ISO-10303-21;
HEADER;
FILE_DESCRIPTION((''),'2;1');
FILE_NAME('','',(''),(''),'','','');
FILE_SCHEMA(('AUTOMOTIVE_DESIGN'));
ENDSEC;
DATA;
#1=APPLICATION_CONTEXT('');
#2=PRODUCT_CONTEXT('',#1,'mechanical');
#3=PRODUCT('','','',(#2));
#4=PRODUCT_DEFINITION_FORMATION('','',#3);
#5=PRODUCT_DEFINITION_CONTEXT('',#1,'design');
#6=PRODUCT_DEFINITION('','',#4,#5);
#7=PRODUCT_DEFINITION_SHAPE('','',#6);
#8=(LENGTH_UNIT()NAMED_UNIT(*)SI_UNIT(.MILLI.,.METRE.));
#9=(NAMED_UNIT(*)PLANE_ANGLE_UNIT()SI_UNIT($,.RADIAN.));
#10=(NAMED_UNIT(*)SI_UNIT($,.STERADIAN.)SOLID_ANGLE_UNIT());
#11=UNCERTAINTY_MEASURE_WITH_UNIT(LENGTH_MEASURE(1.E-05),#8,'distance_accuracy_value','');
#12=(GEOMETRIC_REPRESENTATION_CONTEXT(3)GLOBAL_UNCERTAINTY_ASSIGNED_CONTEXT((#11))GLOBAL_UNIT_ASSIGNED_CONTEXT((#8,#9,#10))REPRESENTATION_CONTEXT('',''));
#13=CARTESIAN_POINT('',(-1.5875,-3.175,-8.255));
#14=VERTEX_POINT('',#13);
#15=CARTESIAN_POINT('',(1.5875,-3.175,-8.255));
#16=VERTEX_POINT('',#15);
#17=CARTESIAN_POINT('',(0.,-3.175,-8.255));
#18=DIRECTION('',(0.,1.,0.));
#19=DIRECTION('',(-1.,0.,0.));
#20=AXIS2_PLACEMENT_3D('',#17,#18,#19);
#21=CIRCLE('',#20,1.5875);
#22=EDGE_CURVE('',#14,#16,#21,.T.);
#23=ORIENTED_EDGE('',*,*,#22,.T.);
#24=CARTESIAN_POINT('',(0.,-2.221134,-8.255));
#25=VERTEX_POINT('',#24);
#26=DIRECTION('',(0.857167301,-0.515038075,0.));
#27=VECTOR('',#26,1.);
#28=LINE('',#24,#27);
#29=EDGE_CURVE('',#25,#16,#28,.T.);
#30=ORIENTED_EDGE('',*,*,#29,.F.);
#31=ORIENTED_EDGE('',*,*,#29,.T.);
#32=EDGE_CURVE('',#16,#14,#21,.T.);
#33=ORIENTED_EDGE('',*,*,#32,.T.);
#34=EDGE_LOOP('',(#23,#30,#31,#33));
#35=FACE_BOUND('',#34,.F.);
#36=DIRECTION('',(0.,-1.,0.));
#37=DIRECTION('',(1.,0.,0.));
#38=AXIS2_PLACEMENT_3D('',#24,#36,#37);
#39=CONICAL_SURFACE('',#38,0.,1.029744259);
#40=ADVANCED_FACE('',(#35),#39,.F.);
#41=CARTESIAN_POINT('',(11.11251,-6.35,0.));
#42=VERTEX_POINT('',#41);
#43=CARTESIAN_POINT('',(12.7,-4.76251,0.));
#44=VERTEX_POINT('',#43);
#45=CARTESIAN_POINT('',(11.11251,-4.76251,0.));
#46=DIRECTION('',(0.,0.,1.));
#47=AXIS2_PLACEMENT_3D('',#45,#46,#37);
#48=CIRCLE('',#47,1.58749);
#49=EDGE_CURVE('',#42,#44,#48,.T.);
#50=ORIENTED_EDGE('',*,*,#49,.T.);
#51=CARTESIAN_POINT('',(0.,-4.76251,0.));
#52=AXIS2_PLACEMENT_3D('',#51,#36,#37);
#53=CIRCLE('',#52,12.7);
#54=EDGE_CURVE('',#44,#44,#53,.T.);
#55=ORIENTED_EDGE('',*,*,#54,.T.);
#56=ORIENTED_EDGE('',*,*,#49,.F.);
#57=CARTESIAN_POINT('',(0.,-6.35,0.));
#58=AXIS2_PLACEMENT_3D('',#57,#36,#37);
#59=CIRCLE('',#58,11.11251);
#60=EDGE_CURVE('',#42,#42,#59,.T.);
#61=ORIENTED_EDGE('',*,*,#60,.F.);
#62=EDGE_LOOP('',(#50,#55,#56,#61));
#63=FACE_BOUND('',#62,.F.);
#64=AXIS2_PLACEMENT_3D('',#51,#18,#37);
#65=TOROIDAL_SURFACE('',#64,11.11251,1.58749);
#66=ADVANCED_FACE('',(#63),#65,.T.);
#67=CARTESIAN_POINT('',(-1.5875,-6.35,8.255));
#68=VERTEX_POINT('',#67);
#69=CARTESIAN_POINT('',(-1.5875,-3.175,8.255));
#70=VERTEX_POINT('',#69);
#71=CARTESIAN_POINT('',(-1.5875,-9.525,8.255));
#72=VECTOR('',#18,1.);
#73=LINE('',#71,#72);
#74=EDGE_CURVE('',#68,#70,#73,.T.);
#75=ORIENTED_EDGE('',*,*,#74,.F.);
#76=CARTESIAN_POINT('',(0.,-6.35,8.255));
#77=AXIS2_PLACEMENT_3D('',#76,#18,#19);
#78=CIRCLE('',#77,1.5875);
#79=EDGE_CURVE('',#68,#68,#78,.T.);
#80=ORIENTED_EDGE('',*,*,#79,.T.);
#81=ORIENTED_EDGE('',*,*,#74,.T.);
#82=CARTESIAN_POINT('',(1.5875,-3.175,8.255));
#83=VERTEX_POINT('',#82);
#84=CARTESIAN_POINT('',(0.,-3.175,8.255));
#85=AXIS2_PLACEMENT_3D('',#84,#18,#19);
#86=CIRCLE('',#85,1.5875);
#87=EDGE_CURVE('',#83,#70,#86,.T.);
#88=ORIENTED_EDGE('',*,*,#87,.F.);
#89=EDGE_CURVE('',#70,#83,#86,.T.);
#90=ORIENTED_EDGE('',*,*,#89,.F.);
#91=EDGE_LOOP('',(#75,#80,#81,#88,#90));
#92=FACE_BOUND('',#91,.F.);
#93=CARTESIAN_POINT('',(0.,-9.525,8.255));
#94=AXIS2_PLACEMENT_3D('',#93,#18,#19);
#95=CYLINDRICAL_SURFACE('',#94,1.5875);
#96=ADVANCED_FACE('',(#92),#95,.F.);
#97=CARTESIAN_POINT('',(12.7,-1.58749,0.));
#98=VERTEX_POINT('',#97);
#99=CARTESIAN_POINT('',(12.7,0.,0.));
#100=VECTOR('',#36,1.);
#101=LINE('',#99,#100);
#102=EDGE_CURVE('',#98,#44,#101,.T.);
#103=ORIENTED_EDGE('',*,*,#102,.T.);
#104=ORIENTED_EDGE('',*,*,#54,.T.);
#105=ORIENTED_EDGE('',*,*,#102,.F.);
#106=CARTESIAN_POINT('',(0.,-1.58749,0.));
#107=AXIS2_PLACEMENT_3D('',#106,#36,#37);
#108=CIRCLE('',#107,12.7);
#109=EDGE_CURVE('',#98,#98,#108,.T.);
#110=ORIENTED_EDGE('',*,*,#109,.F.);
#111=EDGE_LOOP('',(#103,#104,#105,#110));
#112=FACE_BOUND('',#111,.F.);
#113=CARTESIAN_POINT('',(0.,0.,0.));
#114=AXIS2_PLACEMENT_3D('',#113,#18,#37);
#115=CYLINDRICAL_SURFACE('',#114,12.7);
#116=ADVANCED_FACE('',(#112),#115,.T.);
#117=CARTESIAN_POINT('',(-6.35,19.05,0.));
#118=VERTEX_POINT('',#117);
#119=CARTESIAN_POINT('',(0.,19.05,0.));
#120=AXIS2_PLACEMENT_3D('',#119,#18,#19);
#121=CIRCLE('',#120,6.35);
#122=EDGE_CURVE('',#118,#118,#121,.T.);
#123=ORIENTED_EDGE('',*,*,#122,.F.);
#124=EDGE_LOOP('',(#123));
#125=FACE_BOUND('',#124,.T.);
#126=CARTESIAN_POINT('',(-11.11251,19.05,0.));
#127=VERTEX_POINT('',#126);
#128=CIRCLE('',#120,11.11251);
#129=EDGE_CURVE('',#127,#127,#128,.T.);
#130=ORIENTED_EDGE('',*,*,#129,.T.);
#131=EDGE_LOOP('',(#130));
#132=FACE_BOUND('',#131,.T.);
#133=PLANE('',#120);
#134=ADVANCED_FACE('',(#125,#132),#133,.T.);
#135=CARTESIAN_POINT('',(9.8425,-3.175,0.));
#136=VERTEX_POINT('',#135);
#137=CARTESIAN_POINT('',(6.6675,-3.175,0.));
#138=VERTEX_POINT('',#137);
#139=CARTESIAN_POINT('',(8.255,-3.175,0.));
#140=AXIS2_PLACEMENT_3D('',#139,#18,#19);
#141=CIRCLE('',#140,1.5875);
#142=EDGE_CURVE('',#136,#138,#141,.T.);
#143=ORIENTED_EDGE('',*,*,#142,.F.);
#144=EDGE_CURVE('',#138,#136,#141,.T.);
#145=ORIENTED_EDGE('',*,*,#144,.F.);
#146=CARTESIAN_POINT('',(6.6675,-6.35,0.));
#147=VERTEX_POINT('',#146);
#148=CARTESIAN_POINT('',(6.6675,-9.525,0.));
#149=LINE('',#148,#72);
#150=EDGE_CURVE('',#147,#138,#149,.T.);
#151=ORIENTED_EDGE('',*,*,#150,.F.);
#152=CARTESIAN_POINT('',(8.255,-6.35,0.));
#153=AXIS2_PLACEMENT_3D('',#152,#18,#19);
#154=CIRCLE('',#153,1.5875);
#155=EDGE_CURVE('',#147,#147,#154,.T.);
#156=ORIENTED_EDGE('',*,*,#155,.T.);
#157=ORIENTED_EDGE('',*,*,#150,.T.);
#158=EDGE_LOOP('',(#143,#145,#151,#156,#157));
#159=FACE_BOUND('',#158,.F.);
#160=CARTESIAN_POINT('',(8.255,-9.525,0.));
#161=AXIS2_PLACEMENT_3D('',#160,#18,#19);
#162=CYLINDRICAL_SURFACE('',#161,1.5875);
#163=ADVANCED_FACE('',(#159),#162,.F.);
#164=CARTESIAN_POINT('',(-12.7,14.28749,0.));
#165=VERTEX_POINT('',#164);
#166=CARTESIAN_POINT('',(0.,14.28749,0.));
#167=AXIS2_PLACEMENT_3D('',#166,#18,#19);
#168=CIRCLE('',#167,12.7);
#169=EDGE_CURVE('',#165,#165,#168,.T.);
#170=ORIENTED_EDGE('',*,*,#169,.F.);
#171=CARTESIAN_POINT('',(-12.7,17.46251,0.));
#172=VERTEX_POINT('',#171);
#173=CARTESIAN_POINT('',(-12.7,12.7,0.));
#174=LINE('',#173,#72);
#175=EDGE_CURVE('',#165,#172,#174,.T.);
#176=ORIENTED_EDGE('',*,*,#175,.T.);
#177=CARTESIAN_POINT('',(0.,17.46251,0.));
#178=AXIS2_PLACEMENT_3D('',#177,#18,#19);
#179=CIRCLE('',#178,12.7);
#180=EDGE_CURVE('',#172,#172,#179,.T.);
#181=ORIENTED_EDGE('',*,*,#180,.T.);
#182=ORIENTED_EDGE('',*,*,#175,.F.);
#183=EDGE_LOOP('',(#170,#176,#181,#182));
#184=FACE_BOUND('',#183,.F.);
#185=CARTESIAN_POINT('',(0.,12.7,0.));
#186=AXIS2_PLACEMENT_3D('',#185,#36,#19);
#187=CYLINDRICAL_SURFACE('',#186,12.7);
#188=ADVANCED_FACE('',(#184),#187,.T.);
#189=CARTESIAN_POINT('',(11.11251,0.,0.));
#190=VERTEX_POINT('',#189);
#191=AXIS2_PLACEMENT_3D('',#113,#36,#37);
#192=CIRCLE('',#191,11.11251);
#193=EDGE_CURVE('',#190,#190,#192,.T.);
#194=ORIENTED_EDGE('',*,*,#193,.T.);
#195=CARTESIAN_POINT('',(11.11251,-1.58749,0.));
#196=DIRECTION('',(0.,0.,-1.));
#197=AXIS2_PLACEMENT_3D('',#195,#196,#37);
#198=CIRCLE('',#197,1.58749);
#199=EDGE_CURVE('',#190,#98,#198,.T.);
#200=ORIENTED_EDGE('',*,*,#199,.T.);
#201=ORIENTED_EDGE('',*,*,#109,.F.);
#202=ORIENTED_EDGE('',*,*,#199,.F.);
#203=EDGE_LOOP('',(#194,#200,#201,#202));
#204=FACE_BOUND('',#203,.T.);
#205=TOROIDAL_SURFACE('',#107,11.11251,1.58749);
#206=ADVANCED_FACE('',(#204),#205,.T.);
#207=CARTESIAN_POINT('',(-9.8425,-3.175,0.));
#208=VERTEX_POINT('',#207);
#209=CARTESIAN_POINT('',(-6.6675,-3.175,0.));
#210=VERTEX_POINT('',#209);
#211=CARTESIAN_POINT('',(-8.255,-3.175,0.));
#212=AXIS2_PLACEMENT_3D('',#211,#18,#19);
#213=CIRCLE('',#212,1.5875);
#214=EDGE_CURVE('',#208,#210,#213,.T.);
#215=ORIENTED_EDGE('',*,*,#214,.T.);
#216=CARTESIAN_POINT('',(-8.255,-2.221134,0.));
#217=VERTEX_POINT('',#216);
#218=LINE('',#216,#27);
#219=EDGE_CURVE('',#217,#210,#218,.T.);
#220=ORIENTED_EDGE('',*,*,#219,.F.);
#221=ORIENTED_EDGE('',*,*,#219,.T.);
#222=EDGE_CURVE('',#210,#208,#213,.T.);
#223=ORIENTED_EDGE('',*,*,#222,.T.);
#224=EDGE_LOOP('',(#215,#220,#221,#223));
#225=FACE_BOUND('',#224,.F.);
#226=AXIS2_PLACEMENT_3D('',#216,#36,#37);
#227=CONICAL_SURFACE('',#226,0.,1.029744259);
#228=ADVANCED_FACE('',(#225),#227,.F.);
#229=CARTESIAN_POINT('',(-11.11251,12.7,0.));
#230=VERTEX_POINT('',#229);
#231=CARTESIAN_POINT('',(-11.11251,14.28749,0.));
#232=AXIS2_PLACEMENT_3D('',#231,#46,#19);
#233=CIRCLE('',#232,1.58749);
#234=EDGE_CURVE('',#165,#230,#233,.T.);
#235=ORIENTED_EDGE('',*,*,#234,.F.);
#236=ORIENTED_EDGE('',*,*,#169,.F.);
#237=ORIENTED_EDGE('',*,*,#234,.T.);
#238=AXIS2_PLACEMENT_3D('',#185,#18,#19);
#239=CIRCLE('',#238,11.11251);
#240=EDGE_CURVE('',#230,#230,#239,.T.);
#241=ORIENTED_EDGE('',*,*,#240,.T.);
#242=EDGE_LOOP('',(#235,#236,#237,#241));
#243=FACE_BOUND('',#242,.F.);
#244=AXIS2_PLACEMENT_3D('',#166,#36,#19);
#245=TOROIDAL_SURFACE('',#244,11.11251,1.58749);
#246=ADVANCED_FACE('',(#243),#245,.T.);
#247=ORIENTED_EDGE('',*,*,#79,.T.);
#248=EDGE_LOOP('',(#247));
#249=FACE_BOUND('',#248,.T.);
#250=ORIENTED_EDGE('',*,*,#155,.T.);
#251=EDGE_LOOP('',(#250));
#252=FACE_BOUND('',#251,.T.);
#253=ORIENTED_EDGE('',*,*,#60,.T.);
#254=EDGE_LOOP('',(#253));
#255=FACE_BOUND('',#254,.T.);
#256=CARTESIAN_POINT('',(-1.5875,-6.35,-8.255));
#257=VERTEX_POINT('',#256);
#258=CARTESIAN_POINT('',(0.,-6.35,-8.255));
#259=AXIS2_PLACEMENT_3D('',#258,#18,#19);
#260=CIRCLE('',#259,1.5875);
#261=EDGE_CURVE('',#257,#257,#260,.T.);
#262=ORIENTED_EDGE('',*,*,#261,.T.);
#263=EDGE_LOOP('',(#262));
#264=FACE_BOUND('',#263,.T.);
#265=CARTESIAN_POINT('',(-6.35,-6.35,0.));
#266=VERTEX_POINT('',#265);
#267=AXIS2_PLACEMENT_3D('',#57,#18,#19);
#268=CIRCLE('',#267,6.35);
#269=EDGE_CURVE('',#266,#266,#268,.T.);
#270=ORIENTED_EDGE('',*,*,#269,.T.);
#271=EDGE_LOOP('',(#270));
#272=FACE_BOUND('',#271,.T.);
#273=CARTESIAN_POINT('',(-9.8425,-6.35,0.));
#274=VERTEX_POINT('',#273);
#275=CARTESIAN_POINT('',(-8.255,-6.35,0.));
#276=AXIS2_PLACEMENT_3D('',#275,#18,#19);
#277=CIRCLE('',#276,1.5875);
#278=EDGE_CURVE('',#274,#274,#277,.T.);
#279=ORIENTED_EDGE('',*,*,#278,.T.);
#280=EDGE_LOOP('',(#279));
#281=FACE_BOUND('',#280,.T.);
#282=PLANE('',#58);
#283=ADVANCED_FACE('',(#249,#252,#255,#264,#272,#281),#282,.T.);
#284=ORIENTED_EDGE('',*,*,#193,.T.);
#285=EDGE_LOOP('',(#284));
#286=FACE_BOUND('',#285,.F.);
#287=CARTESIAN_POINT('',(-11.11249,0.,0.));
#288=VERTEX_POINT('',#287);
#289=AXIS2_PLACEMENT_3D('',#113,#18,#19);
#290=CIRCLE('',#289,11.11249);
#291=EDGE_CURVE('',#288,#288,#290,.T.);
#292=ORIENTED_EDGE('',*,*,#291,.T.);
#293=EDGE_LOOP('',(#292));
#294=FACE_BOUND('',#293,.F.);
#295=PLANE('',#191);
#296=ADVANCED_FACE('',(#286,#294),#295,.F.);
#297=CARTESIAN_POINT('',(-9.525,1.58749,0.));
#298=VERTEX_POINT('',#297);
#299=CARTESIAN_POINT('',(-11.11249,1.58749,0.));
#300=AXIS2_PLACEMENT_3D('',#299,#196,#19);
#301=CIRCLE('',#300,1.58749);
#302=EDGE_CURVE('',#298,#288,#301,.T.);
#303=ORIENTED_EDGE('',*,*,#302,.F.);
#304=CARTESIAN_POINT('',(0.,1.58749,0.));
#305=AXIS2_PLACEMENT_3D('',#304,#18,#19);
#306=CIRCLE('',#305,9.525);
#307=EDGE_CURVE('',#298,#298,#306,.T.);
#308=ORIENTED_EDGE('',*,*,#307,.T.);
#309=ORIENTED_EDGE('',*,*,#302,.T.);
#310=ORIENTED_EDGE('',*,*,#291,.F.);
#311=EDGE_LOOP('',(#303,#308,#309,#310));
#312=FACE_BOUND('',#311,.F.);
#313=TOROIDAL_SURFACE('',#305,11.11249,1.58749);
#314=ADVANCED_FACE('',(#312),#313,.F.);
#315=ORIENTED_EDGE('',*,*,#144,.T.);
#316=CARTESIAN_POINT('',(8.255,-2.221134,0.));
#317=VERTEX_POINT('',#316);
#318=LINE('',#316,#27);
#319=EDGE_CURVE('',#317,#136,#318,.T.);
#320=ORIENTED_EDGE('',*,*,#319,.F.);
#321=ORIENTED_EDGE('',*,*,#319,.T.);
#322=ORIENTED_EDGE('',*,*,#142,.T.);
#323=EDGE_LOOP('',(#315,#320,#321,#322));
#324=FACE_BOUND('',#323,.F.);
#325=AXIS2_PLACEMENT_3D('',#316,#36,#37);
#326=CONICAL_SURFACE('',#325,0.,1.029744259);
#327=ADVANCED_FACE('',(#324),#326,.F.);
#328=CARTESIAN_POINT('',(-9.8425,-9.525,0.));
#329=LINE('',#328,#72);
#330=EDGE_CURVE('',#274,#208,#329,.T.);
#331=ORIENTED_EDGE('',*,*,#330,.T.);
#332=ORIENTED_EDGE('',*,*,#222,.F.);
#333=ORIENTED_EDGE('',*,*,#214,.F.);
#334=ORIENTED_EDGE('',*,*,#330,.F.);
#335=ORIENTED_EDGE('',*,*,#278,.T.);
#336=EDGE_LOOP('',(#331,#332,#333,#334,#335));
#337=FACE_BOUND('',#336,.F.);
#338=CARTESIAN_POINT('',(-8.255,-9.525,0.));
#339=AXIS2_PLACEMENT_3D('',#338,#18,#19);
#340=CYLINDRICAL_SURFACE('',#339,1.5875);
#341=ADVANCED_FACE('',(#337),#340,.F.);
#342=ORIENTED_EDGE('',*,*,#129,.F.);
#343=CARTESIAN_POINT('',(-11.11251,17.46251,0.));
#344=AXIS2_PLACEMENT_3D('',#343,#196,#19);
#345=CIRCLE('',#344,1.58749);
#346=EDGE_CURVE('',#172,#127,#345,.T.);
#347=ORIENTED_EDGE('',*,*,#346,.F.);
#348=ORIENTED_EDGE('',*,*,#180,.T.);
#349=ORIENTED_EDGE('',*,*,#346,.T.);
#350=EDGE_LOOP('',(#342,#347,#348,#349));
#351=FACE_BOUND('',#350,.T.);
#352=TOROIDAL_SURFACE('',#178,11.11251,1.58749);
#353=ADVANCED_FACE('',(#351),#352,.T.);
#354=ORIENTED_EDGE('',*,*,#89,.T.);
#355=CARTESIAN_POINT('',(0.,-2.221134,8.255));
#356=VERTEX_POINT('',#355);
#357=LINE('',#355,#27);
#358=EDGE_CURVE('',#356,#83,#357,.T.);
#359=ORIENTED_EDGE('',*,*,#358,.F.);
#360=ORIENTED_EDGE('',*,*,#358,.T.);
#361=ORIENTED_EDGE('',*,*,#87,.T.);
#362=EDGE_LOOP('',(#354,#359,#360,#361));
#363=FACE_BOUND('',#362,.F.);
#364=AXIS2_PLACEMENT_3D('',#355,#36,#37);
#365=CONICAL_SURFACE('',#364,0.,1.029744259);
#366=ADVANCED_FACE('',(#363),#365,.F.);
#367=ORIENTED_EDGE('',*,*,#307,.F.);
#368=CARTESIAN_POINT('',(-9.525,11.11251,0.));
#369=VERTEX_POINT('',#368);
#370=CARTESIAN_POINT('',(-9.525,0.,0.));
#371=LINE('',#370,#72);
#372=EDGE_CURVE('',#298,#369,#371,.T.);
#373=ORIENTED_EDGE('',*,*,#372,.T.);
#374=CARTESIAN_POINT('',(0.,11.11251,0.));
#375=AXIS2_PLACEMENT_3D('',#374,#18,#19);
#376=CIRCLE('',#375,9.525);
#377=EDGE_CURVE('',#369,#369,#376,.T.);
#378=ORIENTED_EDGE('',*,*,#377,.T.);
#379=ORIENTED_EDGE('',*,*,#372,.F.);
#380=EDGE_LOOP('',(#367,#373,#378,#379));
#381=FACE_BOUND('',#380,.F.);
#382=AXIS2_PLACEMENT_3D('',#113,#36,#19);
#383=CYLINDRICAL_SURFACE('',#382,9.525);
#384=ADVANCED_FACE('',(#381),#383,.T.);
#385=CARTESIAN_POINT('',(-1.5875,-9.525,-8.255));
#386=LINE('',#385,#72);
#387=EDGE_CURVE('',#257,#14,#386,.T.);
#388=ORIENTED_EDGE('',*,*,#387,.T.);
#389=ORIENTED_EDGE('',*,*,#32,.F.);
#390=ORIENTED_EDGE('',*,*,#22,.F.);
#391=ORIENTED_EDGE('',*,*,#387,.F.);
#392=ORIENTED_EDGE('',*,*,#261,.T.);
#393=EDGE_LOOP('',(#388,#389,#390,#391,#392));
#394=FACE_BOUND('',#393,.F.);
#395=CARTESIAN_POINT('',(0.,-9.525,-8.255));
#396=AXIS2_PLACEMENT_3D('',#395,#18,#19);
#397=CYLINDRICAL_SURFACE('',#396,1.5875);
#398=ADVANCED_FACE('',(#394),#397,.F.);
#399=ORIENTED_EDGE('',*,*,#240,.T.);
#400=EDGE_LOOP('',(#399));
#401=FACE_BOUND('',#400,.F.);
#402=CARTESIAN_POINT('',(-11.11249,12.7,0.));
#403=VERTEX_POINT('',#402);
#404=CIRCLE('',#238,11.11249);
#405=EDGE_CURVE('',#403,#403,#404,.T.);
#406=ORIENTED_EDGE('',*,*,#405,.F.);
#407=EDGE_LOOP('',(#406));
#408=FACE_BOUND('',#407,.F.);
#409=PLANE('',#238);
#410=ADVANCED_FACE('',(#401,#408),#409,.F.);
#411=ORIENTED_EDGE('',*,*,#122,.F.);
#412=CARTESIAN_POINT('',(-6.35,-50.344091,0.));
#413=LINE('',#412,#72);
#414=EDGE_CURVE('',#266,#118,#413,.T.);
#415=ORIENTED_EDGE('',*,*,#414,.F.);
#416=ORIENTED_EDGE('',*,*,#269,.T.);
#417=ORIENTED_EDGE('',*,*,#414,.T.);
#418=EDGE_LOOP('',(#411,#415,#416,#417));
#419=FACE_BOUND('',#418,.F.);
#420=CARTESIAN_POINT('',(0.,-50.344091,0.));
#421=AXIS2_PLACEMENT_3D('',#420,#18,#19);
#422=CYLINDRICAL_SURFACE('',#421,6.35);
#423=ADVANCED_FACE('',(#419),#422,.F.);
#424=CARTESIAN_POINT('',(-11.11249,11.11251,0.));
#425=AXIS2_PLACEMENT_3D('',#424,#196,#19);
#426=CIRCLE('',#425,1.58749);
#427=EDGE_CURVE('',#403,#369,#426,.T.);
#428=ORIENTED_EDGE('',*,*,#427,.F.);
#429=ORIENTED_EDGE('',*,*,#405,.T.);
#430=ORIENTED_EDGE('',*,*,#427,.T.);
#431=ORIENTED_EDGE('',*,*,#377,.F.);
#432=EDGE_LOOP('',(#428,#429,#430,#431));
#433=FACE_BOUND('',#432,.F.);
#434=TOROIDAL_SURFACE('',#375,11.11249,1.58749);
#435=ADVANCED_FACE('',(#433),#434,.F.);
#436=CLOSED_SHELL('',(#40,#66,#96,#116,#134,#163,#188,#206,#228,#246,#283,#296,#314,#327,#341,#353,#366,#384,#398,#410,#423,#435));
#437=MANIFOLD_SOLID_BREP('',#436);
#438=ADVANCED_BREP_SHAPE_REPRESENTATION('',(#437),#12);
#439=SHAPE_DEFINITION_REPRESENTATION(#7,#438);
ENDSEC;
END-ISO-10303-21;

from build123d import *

# Parameters (mm, degrees)
F0_R     = 12.7
F1_DEPTH = 6.35
F2_R     = 9.525
F3_DEPTH = 12.7
F4_R     = 12.7
F5_DEPTH = 6.35
F7_D     = 12.7
F9_D     = 3.175
F9_DEPTH = 3.175
F9_TIP   = 0.9538662327
F10_R    = 1.58749


# Not quite as in the source:
# - a fillet or chamfer is up to 0.001 mm smaller than in the source, because OpenCascade refuses the exact size


with BuildPart() as f1:
    # F0 (on Front) → F1 (new body)
    with BuildSketch(Plane.XZ):
        Circle(F0_R)
    extrude(amount=F1_DEPTH)

    # F2 (on face) → F3 (join)
    with BuildSketch(Plane(origin=(0, 0, 0), x_dir=(-1, 0, 0), z_dir=(0, 1, 0))):
        Circle(F2_R)
    extrude(amount=F3_DEPTH)

    # F4 (on face) → F5 (join)
    with BuildSketch(Plane(origin=(0, 12.7, 0), x_dir=(-1, 0, 0), z_dir=(0, 1, 0))):
        Circle(F4_R)
    extrude(amount=F5_DEPTH)

    # F7 (through all)
    with Locations(Plane.XZ.offset(6.35)):
        with Locations((0, 0)):
            Hole(F7_D / 2)

    # F9
    with Locations(Plane.XZ.offset(6.35)):
        with Locations((0, 8.255), (-8.255, 0), (8.255, 0), (0, -8.255)):
            Hole(F9_D / 2, depth=F9_DEPTH)
            with Locations((0, 0, -(F9_DEPTH + F9_TIP / 2))):  # 118° drill point
                Cone(0, F9_D / 2, F9_TIP, mode=Mode.SUBTRACT)

    # F10 (radius 1.5875 in the source; OpenCascade refuses exactly that, so slightly less here)
    f10_edges = [f1.edges().sort_by_distance(p)[0] for p in [
        (12.7, 12.7, 0),
        (9.525, 12.7, 0),
        (-12.7, 0, 0),
        (9.525, 0, 0),
        (12.7, 19.05, 0),
        (-12.7, -6.35, 0),
    ]]
    fillet(f10_edges, radius=F10_R)


solid = f1.part
